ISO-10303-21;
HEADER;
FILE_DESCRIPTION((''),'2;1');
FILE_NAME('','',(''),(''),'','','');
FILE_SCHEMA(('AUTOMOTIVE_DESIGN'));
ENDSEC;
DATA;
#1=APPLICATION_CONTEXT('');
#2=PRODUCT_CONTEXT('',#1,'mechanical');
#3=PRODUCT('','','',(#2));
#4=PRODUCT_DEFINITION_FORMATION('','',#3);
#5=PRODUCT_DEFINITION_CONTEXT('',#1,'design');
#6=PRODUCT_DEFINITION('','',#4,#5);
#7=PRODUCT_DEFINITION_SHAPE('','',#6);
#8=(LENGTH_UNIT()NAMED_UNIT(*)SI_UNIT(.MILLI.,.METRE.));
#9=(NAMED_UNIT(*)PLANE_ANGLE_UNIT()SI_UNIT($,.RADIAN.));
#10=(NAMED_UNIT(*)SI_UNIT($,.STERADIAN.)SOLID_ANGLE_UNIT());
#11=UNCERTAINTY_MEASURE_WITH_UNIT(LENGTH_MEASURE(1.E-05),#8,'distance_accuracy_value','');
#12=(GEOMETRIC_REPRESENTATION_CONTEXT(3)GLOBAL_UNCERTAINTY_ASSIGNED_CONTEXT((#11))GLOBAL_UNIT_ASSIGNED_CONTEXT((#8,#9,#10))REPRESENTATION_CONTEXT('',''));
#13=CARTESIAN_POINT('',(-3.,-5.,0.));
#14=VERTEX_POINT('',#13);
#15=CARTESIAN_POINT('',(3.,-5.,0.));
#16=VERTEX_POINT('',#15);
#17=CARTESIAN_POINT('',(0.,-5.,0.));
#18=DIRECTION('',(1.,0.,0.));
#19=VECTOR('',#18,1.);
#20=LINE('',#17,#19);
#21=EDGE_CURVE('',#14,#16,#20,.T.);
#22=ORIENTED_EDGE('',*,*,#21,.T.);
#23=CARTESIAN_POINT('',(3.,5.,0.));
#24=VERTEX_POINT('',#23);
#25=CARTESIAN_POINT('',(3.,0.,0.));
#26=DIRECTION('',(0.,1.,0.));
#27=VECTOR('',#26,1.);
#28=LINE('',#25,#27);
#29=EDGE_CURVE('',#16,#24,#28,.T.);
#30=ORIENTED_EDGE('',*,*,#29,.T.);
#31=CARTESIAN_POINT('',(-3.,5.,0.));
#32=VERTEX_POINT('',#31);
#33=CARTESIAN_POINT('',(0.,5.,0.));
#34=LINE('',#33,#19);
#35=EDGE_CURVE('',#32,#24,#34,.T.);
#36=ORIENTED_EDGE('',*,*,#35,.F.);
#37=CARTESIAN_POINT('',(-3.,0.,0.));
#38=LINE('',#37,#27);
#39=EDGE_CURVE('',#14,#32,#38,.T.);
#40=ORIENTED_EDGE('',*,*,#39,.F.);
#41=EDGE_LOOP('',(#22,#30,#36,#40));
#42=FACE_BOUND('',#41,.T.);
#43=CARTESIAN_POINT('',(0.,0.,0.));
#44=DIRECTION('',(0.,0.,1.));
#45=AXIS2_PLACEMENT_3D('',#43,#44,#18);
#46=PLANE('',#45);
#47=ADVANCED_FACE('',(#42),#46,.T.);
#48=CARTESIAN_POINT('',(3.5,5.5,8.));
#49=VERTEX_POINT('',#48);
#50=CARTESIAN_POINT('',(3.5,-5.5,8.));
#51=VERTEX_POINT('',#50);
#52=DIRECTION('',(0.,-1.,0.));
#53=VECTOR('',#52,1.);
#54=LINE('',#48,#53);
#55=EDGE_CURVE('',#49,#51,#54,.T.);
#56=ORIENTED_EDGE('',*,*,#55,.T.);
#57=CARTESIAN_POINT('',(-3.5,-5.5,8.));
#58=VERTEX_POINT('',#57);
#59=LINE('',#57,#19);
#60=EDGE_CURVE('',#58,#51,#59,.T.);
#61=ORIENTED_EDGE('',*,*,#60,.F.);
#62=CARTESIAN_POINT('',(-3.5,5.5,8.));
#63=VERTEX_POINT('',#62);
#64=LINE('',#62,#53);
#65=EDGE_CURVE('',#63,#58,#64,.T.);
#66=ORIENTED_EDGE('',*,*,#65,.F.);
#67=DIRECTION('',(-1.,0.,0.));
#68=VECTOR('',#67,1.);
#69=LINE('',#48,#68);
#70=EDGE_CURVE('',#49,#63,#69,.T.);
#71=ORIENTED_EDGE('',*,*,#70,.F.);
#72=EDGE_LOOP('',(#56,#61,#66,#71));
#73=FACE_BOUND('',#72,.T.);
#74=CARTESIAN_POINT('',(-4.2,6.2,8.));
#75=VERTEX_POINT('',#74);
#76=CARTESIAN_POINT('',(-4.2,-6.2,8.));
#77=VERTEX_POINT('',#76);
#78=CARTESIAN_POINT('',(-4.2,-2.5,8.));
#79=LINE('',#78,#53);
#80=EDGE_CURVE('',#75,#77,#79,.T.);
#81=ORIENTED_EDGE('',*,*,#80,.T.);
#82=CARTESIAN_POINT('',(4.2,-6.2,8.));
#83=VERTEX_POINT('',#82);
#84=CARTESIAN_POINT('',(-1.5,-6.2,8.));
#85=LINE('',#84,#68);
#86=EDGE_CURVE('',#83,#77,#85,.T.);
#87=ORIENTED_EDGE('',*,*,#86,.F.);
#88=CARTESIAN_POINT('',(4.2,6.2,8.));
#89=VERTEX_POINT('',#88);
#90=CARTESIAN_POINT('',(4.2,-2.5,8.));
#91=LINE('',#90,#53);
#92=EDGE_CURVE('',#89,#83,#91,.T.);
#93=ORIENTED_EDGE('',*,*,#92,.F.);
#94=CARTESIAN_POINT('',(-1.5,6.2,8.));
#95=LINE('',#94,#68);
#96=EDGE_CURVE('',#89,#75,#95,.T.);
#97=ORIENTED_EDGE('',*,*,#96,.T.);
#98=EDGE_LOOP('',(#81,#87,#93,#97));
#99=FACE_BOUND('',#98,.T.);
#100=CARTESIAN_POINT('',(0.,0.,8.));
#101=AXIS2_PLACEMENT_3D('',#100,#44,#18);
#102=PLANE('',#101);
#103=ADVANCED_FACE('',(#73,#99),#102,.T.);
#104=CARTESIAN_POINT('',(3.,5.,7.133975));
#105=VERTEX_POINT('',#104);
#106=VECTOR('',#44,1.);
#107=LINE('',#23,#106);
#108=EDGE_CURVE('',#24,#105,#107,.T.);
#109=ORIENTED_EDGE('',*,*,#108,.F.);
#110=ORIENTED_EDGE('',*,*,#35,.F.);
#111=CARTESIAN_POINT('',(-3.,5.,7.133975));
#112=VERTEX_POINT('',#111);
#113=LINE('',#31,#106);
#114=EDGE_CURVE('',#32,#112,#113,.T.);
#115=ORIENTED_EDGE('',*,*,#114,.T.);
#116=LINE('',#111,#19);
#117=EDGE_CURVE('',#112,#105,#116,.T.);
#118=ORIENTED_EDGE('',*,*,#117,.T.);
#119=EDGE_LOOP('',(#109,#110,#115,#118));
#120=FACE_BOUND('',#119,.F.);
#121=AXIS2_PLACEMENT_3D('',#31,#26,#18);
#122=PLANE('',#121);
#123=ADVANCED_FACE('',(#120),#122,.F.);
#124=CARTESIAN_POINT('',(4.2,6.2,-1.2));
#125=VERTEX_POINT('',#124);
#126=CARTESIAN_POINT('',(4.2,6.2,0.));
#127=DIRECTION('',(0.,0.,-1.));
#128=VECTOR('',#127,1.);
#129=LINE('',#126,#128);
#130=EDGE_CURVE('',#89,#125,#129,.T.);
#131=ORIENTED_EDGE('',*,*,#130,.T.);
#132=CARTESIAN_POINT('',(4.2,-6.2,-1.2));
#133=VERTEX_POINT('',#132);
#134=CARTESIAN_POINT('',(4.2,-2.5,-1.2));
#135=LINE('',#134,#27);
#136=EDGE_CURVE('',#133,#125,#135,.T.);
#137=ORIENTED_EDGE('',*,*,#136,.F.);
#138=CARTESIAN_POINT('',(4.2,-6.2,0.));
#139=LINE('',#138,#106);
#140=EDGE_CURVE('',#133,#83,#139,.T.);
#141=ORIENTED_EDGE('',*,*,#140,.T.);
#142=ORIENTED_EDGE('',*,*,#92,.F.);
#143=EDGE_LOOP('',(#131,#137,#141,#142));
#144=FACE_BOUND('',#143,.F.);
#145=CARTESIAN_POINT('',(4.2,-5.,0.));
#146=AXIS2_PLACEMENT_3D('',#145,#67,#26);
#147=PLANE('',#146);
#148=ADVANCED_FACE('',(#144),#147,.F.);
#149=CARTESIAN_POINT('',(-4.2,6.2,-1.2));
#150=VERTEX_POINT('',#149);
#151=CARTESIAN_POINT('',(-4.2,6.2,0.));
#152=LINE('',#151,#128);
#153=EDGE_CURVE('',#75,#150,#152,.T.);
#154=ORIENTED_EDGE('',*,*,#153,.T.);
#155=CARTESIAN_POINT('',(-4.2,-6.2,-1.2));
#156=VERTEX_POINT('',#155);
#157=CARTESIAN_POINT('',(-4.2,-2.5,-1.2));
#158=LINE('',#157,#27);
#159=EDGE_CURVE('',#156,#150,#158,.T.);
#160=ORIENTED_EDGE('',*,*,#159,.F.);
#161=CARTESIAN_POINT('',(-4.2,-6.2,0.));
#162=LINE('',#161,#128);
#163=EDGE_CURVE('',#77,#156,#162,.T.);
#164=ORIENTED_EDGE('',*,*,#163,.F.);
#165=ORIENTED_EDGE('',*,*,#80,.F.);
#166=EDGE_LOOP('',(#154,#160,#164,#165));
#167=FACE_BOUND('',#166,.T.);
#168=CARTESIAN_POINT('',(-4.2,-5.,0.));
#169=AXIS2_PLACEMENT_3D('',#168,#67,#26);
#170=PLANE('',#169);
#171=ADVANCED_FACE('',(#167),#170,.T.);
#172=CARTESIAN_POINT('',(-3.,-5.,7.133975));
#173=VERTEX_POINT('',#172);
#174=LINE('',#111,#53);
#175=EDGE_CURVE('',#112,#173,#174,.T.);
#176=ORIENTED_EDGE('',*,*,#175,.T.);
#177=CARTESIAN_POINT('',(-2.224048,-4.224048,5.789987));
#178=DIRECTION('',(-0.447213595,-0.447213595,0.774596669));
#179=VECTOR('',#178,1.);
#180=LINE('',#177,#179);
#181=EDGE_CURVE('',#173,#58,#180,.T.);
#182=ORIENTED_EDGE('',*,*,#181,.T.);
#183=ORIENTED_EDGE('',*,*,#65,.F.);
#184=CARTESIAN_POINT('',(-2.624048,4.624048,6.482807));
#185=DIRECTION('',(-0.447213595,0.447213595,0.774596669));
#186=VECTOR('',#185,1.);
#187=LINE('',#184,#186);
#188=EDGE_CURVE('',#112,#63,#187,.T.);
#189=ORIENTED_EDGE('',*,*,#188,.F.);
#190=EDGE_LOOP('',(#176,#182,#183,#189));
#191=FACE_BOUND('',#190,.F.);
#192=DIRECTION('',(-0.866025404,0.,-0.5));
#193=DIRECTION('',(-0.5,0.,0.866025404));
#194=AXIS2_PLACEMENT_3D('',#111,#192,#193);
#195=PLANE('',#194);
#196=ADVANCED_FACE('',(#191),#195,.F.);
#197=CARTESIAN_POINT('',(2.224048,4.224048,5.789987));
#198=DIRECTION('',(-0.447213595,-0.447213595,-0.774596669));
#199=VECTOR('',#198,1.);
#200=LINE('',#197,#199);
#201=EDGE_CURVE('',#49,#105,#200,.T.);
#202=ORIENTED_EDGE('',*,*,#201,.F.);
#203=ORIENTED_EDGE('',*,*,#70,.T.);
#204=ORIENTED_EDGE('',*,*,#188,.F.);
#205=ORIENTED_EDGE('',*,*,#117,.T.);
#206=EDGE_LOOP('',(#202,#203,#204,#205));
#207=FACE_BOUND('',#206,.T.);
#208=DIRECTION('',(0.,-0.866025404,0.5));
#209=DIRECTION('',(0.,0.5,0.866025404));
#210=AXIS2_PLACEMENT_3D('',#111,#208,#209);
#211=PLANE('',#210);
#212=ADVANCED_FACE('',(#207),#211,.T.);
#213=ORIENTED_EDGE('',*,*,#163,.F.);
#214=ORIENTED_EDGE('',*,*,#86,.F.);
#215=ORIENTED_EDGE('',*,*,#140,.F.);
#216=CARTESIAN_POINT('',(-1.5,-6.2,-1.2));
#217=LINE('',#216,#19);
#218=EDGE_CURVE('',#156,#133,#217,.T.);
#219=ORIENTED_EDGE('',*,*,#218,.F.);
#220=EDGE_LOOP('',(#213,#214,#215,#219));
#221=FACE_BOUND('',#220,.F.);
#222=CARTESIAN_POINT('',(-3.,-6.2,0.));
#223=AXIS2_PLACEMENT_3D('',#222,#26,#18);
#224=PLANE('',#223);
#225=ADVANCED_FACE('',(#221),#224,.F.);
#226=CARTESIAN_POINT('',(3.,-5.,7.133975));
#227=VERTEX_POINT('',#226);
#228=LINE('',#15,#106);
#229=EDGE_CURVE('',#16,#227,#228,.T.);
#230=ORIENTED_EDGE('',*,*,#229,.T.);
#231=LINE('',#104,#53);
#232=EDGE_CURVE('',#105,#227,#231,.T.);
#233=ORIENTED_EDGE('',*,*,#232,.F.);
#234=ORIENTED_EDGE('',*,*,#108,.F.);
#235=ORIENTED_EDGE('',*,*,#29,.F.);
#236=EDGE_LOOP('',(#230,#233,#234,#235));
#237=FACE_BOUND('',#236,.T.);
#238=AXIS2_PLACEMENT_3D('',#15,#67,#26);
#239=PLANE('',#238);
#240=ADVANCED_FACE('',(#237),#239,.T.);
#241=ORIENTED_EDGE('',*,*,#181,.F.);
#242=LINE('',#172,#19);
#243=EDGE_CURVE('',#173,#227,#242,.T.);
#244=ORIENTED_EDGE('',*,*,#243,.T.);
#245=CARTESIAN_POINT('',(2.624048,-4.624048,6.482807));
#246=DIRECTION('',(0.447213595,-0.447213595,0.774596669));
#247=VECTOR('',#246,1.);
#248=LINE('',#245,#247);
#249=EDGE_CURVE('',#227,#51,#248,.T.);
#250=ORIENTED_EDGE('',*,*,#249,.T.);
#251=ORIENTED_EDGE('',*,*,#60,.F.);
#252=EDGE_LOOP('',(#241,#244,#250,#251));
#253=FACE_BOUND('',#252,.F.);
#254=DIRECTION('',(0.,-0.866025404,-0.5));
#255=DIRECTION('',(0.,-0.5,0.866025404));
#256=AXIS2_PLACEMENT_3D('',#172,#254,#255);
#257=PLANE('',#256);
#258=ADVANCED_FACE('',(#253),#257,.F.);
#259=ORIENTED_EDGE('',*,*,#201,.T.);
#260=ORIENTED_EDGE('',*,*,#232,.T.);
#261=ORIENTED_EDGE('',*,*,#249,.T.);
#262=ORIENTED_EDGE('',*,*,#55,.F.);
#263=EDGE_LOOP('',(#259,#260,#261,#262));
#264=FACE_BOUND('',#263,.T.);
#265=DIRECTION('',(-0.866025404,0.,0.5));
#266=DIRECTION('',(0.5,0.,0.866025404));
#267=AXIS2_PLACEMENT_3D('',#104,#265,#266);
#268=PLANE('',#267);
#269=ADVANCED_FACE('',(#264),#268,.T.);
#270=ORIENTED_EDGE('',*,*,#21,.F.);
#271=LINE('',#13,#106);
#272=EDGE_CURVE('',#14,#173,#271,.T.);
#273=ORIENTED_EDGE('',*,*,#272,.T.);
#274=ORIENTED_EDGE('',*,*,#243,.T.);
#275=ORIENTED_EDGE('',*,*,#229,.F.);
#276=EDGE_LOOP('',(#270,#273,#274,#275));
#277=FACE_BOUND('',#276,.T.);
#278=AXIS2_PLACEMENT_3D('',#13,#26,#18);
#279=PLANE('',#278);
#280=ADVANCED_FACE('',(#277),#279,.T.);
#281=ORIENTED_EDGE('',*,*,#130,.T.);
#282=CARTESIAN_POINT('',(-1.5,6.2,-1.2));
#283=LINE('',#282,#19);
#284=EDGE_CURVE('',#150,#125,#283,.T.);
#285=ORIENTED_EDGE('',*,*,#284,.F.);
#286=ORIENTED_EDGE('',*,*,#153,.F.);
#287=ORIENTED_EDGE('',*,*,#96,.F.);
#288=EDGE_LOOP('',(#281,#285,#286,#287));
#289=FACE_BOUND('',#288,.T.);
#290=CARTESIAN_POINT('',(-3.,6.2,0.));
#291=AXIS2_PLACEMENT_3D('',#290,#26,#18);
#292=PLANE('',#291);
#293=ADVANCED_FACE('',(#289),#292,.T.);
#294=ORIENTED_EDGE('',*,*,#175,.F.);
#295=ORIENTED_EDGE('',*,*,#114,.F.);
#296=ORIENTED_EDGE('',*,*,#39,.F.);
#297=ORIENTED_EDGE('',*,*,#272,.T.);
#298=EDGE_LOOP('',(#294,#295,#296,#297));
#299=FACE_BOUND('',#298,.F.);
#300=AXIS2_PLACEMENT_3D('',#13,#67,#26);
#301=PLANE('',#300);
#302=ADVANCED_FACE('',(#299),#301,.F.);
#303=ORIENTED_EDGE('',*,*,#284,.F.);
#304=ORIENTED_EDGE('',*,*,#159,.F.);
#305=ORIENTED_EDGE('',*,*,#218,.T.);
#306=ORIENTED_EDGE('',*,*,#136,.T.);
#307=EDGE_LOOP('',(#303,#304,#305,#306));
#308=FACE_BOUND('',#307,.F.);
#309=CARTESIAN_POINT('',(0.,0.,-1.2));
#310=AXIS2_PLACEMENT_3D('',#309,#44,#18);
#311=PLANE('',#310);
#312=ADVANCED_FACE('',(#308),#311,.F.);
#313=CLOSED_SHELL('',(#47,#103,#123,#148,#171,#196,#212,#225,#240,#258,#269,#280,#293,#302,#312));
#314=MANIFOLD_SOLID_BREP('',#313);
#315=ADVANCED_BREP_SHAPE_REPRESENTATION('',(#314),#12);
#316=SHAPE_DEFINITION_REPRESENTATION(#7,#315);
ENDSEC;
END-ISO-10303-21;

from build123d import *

# Parameters (mm, degrees)
F0_W         = 6
F0_H         = 10
F1_DEPTH     = 8
F2_T         = 1.2
F3_T1_DEPTH  = 6
F3_T3_DEPTH  = 10
F3_T9_DEPTH  = 8.2404819853
F3_T13_DEPTH = 12.2404819853
F3_T20_DEPTH = 8.2404819853
F3_T24_DEPTH = 12.2404819853
F3_T31_DEPTH = 12.2404819853
F3_T35_DEPTH = 8.2404819853
F3_T42_DEPTH = 8.2404819853
F3_T46_DEPTH = 12.2404819853


# Not quite as in the source:
# - a fillet or chamfer that OpenCascade refuses, or shapes differently, is made with other operations: its cross-section is extruded or revolved along the edge and cut away or added


with BuildPart() as f1:
    # F0 (on Top) → F1 (new body)
    with BuildSketch(Plane.XY):
        Rectangle(F0_W, F0_H)
    extrude(amount=F1_DEPTH)

    # F2
    f2_openings = [f1.faces().sort_by_distance(p)[0] for p in [
        (0, 0, 8),
    ]]
    offset(amount=F2_T, openings=f2_openings, kind=Kind.INTERSECTION)

    # F3: chamfer of 0.5 x 0.8660254038 on 4 edges, made by hand

    # F3_s2 → F3_t1 (cut)
    with BuildSketch(Plane.YZ.offset(-3)):
        Polygon((5, 7.1339745962), (5.5, 8), (5, 8), align=None)
        Polygon((-5, 7.1339745962), (-5.5, 8), (-5, 8), align=None)
    extrude(amount=F3_T1_DEPTH, mode=Mode.SUBTRACT)

    # F3_s4 → F3_t3 (cut)
    with BuildSketch(Plane.XZ.offset(-5)):
        Polygon((-3, 7.1339745962), (-3.5, 8), (-3, 8), align=None)
        Polygon((3, 7.1339745962), (3.5, 8), (3, 8), align=None)
    extrude(amount=F3_T3_DEPTH, mode=Mode.SUBTRACT)


with BuildPart() as f3_tool7:
    # F3_s8 → F3_t9 (new body)
    with BuildSketch(Plane.YZ.offset(5.2404819853)):
        Polygon((5, 7.1339745962), (5.5, 8), (5, 8), align=None)
    extrude(amount=-F3_T9_DEPTH)

    split(bisect_by=Plane.YZ.offset(3), keep=Keep.TOP)


with BuildPart() as f3_tool11:
    # F3_s12 → F3_t13 (new body)
    with BuildSketch(Plane.XZ.offset(5)):
        Polygon((3, 7.1339745962), (3.5, 8), (3, 8), align=None)
    extrude(amount=-F3_T13_DEPTH)

    split(bisect_by=Plane.XZ.offset(-5), keep=Keep.BOTTOM)


with BuildPart() as f3_tool7_1:
    add(f3_tool7.part)

    # F3_t15: intersect F3_tool11
    add(f3_tool11.part, mode=Mode.INTERSECT)


with BuildPart() as f1_1:
    add(f1.part)

    # F3_t5: cut F3_tool7
    add(f3_tool7_1.part, mode=Mode.SUBTRACT)


with BuildPart() as f3_tool18:
    # F3_s19 → F3_t20 (new body)
    with BuildSketch(Plane.YZ.offset(3)):
        Polygon((5, 7.1339745962), (5.5, 8), (5, 8), align=None)
    extrude(amount=-F3_T20_DEPTH)

    split(bisect_by=Plane.YZ.offset(-3), keep=Keep.BOTTOM)


with BuildPart() as f3_tool22:
    # F3_s23 → F3_t24 (new body)
    with BuildSketch(Plane.XZ.offset(-7.2404819853)):
        Polygon((-3, 7.1339745962), (-3.5, 8), (-3, 8), align=None)
    extrude(amount=F3_T24_DEPTH)

    split(bisect_by=Plane.XZ.offset(-5), keep=Keep.BOTTOM)


with BuildPart() as f3_tool18_1:
    add(f3_tool18.part)

    # F3_t26: intersect F3_tool22
    add(f3_tool22.part, mode=Mode.INTERSECT)


with BuildPart() as f1_2:
    add(f1_1.part)

    # F3_t16: cut F3_tool18
    add(f3_tool18_1.part, mode=Mode.SUBTRACT)


with BuildPart() as f3_tool29:
    # F3_s30 → F3_t31 (new body)
    with BuildSketch(Plane.XZ.offset(-5)):
        Polygon((-3, 7.1339745962), (-3.5, 8), (-3, 8), align=None)
    extrude(amount=F3_T31_DEPTH)

    split(bisect_by=Plane.XZ.offset(5), keep=Keep.TOP)


with BuildPart() as f3_tool33:
    # F3_s34 → F3_t35 (new body)
    with BuildSketch(Plane.YZ.offset(-5.2404819853)):
        Polygon((-5, 7.1339745962), (-5.5, 8), (-5, 8), align=None)
    extrude(amount=F3_T35_DEPTH)

    split(bisect_by=Plane.YZ.offset(-3), keep=Keep.BOTTOM)


with BuildPart() as f3_tool29_1:
    add(f3_tool29.part)

    # F3_t37: intersect F3_tool33
    add(f3_tool33.part, mode=Mode.INTERSECT)


with BuildPart() as f1_3:
    add(f1_2.part)

    # F3_t27: cut F3_tool29
    add(f3_tool29_1.part, mode=Mode.SUBTRACT)


with BuildPart() as f3_tool40:
    # F3_s41 → F3_t42 (new body)
    with BuildSketch(Plane.YZ.offset(-3)):
        Polygon((-5, 7.1339745962), (-5.5, 8), (-5, 8), align=None)
    extrude(amount=F3_T42_DEPTH)

    split(bisect_by=Plane.YZ.offset(3), keep=Keep.TOP)


with BuildPart() as f3_tool44:
    # F3_s45 → F3_t46 (new body)
    with BuildSketch(Plane.XZ.offset(7.2404819853)):
        Polygon((3, 7.1339745962), (3.5, 8), (3, 8), align=None)
    extrude(amount=-F3_T46_DEPTH)

    split(bisect_by=Plane.XZ.offset(5), keep=Keep.TOP)


with BuildPart() as f3_tool40_1:
    add(f3_tool40.part)

    # F3_t48: intersect F3_tool44
    add(f3_tool44.part, mode=Mode.INTERSECT)


with BuildPart() as f1_4:
    add(f1_3.part)

    # F3_t38: cut F3_tool40
    add(f3_tool40_1.part, mode=Mode.SUBTRACT)


solid = f1_4.part
